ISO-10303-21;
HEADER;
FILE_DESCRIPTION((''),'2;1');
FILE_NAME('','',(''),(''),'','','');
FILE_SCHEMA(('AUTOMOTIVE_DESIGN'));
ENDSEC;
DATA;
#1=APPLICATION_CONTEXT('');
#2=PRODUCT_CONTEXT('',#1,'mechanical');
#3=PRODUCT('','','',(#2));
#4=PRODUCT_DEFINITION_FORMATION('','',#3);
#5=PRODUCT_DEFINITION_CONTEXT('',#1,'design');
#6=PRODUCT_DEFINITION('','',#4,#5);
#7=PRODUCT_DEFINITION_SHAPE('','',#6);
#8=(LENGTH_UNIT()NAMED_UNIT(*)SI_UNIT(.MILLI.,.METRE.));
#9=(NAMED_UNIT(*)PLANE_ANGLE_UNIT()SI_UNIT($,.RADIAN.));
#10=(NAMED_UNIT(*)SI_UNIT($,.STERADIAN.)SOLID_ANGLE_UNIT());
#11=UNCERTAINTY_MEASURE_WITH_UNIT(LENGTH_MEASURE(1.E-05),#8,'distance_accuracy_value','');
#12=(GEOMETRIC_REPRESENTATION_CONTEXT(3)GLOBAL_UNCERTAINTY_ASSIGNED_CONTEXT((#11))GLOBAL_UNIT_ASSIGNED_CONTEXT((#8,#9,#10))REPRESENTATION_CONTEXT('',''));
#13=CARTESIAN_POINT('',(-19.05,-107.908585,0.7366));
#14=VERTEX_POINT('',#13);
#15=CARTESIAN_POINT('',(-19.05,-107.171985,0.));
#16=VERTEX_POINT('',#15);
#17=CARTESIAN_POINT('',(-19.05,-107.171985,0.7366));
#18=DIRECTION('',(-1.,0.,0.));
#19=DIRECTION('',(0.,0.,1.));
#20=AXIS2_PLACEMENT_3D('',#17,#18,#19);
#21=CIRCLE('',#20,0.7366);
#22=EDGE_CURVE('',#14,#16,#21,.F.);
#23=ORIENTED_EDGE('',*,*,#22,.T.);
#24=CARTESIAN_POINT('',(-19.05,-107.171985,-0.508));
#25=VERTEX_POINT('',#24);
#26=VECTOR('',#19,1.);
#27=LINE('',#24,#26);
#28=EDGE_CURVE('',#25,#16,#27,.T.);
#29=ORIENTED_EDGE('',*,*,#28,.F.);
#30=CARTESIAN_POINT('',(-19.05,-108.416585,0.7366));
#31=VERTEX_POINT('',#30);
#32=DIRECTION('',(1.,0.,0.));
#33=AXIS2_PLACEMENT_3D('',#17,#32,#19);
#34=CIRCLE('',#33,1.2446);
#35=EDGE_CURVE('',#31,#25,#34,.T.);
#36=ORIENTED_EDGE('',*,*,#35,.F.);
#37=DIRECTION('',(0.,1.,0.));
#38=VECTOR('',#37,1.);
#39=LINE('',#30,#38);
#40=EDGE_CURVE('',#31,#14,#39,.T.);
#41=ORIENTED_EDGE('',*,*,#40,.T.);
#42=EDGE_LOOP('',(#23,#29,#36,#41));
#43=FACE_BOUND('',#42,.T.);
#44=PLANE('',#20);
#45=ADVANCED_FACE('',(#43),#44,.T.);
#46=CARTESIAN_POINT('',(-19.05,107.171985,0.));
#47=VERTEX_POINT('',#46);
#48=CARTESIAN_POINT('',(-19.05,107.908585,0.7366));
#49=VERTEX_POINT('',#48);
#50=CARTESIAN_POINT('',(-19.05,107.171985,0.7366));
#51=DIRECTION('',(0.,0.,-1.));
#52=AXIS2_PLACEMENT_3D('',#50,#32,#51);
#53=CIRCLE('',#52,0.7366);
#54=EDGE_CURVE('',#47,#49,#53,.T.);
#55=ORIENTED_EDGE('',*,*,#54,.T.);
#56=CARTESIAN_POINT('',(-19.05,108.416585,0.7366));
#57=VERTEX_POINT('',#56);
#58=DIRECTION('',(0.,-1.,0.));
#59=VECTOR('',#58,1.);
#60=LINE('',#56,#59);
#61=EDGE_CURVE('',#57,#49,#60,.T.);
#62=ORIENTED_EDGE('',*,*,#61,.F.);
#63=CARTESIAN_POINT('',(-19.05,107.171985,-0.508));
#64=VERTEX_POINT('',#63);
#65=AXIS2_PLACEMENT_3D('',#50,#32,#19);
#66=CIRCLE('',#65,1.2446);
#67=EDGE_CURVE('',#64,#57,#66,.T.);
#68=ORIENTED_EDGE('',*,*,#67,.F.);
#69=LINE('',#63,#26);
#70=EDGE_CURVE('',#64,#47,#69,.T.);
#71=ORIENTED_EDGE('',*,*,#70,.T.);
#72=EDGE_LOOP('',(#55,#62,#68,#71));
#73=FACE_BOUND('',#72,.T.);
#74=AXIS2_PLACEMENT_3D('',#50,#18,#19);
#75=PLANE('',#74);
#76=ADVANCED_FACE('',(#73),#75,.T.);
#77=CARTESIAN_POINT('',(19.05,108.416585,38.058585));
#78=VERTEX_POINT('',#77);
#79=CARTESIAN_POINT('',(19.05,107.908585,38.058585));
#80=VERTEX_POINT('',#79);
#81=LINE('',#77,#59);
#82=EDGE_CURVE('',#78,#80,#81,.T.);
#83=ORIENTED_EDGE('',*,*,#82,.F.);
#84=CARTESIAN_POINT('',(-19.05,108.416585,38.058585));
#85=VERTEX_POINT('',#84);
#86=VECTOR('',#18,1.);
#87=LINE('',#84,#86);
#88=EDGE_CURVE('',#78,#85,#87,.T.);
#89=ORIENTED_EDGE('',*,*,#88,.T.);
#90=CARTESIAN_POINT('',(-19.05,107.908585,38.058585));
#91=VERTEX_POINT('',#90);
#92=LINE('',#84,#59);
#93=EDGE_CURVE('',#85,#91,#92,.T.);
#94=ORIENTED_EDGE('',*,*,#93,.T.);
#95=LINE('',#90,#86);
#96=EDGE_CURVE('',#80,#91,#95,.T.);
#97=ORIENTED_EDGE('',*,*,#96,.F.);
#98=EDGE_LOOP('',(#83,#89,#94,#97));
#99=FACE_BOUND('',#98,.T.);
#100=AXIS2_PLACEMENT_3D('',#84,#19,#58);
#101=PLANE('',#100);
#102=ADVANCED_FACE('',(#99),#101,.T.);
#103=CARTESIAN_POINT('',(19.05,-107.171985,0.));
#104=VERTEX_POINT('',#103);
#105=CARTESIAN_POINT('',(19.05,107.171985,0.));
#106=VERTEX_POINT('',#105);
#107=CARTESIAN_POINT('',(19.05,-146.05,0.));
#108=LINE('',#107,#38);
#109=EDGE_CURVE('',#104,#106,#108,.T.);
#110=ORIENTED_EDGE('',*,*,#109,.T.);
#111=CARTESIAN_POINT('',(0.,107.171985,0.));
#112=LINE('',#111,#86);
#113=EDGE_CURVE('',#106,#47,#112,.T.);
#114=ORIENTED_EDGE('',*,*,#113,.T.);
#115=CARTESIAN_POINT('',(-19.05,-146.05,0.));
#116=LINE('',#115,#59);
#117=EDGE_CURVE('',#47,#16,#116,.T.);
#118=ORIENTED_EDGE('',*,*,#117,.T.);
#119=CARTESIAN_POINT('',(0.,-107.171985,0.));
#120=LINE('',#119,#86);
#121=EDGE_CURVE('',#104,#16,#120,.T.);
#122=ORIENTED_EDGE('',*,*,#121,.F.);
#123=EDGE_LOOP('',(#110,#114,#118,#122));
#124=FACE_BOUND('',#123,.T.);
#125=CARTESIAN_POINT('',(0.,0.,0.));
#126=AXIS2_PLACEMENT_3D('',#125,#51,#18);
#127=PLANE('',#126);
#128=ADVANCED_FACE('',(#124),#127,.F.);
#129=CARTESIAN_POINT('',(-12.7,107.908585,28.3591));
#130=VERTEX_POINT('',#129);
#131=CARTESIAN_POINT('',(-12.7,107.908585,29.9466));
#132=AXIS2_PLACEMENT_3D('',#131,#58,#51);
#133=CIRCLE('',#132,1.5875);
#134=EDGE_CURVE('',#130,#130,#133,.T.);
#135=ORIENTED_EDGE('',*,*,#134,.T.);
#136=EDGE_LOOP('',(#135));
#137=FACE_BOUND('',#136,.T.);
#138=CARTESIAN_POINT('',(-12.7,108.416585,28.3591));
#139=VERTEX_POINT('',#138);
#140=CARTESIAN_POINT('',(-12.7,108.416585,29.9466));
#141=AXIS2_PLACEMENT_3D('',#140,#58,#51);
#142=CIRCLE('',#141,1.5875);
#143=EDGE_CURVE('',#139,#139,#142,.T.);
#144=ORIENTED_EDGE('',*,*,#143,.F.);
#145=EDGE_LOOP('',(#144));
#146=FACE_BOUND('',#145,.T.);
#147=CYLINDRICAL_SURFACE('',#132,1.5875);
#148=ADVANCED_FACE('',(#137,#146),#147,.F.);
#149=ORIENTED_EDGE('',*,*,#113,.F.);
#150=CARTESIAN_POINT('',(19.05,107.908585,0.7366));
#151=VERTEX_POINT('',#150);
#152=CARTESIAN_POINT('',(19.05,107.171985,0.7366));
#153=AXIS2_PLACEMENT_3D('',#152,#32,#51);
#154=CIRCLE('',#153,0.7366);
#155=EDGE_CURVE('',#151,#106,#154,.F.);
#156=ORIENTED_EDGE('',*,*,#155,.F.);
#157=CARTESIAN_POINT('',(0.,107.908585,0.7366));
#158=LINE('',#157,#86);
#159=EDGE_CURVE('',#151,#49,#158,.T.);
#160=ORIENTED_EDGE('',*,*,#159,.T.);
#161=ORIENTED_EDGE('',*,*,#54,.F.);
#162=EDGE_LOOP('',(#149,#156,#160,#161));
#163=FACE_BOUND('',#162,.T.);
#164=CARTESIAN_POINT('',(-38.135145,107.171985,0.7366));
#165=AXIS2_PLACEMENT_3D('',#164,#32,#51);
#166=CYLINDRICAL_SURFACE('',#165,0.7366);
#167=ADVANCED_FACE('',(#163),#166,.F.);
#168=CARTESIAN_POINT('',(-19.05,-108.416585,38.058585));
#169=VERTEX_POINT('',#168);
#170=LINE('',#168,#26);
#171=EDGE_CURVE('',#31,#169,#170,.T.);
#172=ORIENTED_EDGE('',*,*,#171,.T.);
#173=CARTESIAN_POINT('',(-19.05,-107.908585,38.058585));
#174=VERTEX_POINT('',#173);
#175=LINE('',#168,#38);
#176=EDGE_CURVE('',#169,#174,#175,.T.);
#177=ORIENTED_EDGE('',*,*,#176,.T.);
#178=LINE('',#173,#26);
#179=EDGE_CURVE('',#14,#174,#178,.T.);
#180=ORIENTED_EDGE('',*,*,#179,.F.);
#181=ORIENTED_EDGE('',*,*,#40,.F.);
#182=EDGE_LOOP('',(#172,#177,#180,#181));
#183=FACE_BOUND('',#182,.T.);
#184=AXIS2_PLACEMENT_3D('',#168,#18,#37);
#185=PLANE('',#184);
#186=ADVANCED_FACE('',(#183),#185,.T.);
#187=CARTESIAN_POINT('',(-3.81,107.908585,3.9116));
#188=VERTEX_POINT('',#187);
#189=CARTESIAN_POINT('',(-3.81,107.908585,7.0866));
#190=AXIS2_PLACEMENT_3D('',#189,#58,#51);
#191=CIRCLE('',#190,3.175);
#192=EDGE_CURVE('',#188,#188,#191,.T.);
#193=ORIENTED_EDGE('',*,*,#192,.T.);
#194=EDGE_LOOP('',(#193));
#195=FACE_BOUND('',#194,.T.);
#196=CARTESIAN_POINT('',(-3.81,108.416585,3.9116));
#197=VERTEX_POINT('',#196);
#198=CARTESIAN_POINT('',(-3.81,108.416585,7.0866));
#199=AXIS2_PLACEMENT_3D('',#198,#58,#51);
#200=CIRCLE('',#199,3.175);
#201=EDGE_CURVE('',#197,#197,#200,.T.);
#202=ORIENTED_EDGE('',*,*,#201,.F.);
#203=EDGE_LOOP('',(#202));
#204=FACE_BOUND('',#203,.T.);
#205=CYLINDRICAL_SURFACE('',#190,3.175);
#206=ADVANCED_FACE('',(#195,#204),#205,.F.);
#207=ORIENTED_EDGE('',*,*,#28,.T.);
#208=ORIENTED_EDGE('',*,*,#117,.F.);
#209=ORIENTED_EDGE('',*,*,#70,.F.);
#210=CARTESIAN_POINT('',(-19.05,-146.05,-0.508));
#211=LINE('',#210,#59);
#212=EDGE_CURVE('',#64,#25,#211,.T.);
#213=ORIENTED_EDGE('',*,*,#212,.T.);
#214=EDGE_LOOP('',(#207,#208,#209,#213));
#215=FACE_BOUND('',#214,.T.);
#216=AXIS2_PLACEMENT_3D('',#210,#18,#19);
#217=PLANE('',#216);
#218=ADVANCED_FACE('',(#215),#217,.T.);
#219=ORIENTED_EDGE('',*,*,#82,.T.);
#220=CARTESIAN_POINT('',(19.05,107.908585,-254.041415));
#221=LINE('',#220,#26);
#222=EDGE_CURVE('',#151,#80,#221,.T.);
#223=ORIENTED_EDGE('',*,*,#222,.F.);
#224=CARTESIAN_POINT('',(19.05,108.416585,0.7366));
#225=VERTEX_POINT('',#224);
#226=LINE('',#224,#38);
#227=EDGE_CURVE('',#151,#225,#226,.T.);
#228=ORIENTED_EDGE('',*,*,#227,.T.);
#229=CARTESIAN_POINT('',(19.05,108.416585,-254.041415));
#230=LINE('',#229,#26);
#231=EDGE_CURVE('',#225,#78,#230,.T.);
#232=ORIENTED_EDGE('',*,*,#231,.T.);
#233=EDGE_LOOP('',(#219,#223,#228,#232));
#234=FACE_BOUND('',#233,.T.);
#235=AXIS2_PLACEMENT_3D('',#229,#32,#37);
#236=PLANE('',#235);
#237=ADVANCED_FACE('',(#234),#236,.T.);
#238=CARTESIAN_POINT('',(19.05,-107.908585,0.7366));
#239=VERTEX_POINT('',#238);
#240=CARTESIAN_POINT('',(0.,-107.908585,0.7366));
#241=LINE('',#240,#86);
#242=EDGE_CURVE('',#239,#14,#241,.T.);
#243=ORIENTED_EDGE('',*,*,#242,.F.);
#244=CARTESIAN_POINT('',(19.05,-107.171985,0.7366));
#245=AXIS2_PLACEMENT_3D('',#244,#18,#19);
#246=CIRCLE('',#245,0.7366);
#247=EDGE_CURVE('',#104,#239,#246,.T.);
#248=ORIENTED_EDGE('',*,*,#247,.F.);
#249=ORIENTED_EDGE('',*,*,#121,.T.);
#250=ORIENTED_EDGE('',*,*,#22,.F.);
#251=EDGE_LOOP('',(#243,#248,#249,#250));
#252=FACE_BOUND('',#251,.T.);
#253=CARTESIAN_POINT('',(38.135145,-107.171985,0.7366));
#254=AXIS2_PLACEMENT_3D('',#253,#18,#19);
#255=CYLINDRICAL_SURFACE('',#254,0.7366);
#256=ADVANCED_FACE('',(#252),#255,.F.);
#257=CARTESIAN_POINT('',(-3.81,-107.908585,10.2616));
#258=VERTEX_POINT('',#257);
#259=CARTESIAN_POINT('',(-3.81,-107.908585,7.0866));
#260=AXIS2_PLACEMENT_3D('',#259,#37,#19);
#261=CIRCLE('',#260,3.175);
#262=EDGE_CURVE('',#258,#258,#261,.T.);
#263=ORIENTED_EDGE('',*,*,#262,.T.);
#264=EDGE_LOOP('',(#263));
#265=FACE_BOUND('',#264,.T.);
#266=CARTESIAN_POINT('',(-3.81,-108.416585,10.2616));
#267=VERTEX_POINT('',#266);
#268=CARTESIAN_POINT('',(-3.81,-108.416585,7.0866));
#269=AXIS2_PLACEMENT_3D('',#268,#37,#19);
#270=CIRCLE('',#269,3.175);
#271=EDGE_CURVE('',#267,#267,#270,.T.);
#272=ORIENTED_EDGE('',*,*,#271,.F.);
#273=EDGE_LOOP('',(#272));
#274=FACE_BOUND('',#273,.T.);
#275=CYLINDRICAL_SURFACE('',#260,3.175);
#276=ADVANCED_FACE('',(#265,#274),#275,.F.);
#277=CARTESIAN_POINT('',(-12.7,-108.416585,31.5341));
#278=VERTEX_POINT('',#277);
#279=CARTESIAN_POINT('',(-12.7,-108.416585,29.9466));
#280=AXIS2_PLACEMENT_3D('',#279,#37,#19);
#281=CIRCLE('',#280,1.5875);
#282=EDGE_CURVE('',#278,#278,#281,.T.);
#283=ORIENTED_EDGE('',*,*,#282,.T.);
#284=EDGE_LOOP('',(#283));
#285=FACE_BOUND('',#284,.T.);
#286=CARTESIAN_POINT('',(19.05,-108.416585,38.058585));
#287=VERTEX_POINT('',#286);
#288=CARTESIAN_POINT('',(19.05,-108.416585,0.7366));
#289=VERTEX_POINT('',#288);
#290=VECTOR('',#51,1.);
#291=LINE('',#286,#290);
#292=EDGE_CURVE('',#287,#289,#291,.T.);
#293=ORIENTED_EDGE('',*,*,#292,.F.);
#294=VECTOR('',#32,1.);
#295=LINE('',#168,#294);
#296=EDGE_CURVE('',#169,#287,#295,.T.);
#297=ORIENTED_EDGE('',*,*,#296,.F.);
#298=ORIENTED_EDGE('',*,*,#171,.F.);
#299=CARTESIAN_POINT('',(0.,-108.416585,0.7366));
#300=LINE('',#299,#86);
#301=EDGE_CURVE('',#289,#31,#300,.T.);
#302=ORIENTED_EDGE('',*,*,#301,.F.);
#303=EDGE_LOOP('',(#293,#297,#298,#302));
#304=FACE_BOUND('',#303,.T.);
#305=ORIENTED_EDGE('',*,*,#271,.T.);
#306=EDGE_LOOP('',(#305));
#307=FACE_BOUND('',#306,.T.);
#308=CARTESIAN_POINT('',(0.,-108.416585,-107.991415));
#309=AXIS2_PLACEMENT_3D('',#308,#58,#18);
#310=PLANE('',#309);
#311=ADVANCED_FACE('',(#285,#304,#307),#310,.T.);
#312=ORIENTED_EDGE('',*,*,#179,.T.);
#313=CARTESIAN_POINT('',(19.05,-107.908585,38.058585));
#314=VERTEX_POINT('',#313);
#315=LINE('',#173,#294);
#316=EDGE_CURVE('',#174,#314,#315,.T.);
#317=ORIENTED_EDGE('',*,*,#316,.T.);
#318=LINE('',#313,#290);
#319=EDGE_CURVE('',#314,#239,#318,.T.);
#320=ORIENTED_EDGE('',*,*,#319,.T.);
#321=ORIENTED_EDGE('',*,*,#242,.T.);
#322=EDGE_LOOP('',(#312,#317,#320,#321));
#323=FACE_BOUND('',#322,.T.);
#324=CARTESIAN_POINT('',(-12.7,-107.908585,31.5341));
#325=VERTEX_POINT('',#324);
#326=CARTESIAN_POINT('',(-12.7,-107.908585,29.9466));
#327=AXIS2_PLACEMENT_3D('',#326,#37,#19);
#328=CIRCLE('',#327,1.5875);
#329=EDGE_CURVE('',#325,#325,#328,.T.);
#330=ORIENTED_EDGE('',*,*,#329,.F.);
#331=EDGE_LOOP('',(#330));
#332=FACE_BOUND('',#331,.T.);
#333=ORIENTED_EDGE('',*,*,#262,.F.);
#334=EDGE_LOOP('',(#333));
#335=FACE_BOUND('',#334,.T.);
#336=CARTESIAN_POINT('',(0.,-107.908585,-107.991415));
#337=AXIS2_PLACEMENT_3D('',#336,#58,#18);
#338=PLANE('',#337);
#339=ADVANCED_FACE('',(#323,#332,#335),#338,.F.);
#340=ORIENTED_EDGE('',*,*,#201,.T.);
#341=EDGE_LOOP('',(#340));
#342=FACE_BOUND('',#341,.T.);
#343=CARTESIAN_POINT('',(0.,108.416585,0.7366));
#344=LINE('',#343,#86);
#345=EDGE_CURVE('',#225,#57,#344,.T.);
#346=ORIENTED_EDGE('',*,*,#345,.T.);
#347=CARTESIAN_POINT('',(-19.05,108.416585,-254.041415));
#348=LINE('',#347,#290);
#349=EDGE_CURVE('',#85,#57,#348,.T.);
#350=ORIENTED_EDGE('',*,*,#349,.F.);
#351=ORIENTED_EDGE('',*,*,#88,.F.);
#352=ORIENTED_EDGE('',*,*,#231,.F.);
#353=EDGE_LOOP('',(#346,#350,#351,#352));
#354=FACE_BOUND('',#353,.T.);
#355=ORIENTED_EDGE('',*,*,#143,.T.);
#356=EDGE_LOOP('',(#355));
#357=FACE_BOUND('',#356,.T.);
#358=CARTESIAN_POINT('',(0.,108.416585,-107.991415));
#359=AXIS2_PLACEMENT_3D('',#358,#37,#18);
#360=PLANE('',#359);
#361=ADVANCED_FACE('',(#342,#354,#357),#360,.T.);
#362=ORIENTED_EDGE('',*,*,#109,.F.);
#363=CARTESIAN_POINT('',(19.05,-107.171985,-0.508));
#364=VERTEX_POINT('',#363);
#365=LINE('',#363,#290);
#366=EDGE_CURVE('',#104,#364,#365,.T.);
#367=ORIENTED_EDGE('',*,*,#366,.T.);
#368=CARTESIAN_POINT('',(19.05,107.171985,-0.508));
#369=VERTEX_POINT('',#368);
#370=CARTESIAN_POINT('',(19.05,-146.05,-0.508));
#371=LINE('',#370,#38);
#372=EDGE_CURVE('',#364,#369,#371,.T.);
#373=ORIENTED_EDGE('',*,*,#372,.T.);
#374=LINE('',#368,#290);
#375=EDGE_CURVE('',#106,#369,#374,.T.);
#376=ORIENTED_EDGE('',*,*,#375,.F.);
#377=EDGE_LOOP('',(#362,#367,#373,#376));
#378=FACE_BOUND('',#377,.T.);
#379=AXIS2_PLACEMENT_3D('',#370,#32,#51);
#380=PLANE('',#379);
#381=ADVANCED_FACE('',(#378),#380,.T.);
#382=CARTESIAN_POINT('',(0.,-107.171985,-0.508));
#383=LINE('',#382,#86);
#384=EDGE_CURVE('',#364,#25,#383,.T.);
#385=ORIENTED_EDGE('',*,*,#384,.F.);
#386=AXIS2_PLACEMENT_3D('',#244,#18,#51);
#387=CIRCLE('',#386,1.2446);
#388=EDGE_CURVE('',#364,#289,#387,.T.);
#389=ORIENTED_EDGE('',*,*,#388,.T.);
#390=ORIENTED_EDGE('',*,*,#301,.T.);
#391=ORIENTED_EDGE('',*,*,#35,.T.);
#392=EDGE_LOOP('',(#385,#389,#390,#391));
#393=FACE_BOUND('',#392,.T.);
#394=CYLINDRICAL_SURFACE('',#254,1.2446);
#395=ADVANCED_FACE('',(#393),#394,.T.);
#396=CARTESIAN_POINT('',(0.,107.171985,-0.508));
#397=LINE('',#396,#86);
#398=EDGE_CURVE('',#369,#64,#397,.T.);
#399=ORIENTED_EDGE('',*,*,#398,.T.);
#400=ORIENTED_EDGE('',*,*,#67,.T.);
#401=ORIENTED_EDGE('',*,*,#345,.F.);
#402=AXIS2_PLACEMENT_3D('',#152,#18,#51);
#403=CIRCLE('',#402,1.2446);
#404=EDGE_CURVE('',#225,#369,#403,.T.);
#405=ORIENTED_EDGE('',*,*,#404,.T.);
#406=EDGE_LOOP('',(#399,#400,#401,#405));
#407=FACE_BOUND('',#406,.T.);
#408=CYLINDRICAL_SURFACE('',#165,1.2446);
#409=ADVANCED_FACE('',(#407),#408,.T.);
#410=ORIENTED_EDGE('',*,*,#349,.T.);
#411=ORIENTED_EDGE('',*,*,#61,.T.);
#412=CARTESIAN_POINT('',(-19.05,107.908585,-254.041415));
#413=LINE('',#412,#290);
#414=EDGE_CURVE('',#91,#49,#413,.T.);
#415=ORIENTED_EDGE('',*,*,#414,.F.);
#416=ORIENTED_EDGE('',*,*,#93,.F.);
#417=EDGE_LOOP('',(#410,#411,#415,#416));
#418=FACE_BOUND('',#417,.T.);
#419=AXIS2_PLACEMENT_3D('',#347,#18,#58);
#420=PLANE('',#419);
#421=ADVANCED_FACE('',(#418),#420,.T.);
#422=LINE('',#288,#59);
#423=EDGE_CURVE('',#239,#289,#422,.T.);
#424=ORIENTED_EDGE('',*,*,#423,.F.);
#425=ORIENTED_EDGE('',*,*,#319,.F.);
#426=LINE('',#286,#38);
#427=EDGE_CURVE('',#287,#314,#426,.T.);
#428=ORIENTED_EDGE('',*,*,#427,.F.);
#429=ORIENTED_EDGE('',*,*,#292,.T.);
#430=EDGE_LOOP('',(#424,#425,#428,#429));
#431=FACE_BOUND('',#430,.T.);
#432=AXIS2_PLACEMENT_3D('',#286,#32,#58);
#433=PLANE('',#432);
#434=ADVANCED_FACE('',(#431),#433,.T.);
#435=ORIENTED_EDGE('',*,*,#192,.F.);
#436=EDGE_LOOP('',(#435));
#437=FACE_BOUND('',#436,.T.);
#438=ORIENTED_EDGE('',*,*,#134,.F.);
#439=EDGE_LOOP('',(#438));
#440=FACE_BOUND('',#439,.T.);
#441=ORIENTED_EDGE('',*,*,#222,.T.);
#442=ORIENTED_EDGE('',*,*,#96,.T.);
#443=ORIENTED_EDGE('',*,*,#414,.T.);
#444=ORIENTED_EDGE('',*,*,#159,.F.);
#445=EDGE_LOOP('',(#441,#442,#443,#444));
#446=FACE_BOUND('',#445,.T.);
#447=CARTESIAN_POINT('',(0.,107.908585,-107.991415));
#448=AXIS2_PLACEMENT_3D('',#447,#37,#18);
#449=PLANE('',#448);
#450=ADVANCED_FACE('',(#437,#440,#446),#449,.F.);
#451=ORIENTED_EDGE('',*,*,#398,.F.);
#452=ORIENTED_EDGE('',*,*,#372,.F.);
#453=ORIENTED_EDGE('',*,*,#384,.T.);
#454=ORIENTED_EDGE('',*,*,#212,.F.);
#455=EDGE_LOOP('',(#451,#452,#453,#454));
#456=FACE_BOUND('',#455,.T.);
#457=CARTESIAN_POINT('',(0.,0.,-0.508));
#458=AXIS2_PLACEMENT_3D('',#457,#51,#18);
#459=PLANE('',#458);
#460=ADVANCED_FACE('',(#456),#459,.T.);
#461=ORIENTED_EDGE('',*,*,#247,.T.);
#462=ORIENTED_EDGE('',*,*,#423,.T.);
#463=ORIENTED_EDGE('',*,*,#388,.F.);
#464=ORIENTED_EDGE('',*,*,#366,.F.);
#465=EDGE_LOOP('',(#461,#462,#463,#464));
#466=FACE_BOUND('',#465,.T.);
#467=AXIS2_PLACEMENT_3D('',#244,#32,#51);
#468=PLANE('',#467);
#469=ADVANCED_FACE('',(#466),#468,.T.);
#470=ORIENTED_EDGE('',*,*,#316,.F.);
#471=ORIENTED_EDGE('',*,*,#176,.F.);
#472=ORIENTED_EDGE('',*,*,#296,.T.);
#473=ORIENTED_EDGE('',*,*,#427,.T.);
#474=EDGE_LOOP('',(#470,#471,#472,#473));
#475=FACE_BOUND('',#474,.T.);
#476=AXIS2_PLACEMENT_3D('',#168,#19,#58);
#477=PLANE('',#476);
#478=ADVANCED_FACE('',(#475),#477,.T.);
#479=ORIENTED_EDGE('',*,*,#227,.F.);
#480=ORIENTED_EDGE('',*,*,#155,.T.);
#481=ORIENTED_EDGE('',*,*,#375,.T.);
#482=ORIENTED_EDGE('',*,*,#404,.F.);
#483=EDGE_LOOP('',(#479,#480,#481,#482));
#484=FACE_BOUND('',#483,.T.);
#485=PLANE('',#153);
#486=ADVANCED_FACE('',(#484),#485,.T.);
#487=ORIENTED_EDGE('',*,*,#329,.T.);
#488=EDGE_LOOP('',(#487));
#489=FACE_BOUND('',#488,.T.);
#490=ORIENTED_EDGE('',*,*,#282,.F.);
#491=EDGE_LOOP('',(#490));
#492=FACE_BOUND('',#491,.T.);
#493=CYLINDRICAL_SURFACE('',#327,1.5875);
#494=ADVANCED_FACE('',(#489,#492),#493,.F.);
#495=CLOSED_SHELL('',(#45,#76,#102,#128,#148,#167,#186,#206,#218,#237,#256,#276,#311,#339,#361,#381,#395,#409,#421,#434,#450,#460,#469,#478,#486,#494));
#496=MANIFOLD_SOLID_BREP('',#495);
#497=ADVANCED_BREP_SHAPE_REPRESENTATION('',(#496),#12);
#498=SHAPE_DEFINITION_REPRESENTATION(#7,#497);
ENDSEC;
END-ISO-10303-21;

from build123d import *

# Parameters (mm, degrees)
SKETCH1_W                        = 38.1
SKETCH1_H                        = 292.1
BASE_FLANGE1_DEPTH               = 0.508
SKETCHED_START                   = -19.05
SKETCHED_BEND5_DEPTH             = 38.1
SKETCHED_BEND5_2_DEPTH           = 38.1
SKETCHED_BEND8_DEPTH             = 38.1
SKETCHED_BEND8_2_DEPTH           = 38.1
F_1_4_0_25_DIAMETER_HOLE4_D      = 6.35
F_1_4_0_25_DIAMETER_HOLE4_DEPTH  = 0.508
F_1_8_0_125_DIAMETER_HOLE1_D     = 3.175
F_1_8_0_125_DIAMETER_HOLE1_DEPTH = 0.508


# Read off the part's stored shape, not the designer's step: Sketched Bend5, Sketched Bend8
# Sheet-metal steps are written as plain solids
with BuildPart() as part:
    # Sketch1 → Base-Flange1 (new body)
    with BuildSketch(Plane.XY):
        Rectangle(SKETCH1_W, SKETCH1_H)
    extrude(amount=-BASE_FLANGE1_DEPTH)

    # Sketched Bend5 outline → Sketched Bend5 (cut)
    with BuildSketch(Plane.YZ.offset(SKETCHED_START)):
        with BuildLine():
            Line((146.05, 0), (108.175204196, 0))
            ThreePointArc((108.175204196, 0), (107.734237547, -0.373760644), (107.171984579, -0.508))
            Line((107.171984579, -0.508), (146.05, -0.508))
            Line((146.05, -0.508), (146.05, 0))
        make_face()
    extrude(amount=SKETCHED_BEND5_DEPTH, mode=Mode.SUBTRACT)

    # Sketched Bend5 2 outline → Sketched Bend5 2 (add)
    with BuildSketch(Plane.YZ.offset(SKETCHED_START)):
        with BuildLine():
            ThreePointArc((108.175204196, 0), (108.354701007, 0.349029345), (108.416584579, 0.7366))
            Line((108.416584579, 0.7366), (108.416584579, 38.058584579))
            Line((108.416584579, 38.058584579), (107.908584579, 38.058584579))
            Line((107.908584579, 38.058584579), (107.908584579, 0.7366))
            ThreePointArc((107.908584579, 0.7366), (107.692839434, 0.215745145), (107.171984579, 0))
            Line((107.171984579, 0), (108.175204196, 0))
        make_face()
    extrude(amount=SKETCHED_BEND5_2_DEPTH)

    # Sketched Bend8 outline → Sketched Bend8 (cut)
    with BuildSketch(Plane.YZ.offset(SKETCHED_START)):
        with BuildLine():
            ThreePointArc((-107.171984579, -0.508), (-107.734237547, -0.373760644), (-108.175204196, 0))
            Line((-108.175204196, 0), (-146.05, 0))
            Line((-146.05, 0), (-146.05, -0.508))
            Line((-146.05, -0.508), (-107.171984579, -0.508))
        make_face()
    extrude(amount=SKETCHED_BEND8_DEPTH, mode=Mode.SUBTRACT)

    # Sketched Bend8 2 outline → Sketched Bend8 2 (add)
    with BuildSketch(Plane.YZ.offset(SKETCHED_START)):
        with BuildLine():
            Line((-107.908584579, 0.7366), (-107.908584579, 38.058584579))
            Line((-107.908584579, 38.058584579), (-108.416584579, 38.058584579))
            Line((-108.416584579, 38.058584579), (-108.416584579, 0.7366))
            ThreePointArc((-108.416584579, 0.7366), (-108.354701007, 0.349029345), (-108.175204196, 0))
            Line((-108.175204196, 0), (-107.171984579, 0))
            ThreePointArc((-107.171984579, 0), (-107.692839434, 0.215745145), (-107.908584579, 0.7366))
        make_face()
    extrude(amount=SKETCHED_BEND8_2_DEPTH)

    # 1/4 (0.25) Diameter Hole4
    with Locations(Plane(origin=(-3.81, 107.908584579, 7.0866), x_dir=(0, 0, -1), z_dir=(0, -1, 0))):
        with Locations((0, 0)):
            f_1_4_0_25_diameter_hole4 = Hole(F_1_4_0_25_DIAMETER_HOLE4_D / 2, depth=F_1_4_0_25_DIAMETER_HOLE4_DEPTH)

    # 1/8 (0.125) Diameter Hole1
    with Locations(Plane(origin=(-12.7, 107.908584579, 29.9466), x_dir=(0, 0, -1), z_dir=(0, -1, 0))):
        with Locations((0, 0)):
            f_1_8_0_125_diameter_hole1 = Hole(F_1_8_0_125_DIAMETER_HOLE1_D / 2, depth=F_1_8_0_125_DIAMETER_HOLE1_DEPTH)

    # Mirror1: 1/4 (0.25) Diameter Hole4, 1/8 (0.125) Diameter Hole1 across plane
    add(f_1_4_0_25_diameter_hole4.mirror(Plane.ZX), mode=Mode.SUBTRACT)
    add(f_1_8_0_125_diameter_hole1.mirror(Plane.ZX), mode=Mode.SUBTRACT)


solid = part.part
